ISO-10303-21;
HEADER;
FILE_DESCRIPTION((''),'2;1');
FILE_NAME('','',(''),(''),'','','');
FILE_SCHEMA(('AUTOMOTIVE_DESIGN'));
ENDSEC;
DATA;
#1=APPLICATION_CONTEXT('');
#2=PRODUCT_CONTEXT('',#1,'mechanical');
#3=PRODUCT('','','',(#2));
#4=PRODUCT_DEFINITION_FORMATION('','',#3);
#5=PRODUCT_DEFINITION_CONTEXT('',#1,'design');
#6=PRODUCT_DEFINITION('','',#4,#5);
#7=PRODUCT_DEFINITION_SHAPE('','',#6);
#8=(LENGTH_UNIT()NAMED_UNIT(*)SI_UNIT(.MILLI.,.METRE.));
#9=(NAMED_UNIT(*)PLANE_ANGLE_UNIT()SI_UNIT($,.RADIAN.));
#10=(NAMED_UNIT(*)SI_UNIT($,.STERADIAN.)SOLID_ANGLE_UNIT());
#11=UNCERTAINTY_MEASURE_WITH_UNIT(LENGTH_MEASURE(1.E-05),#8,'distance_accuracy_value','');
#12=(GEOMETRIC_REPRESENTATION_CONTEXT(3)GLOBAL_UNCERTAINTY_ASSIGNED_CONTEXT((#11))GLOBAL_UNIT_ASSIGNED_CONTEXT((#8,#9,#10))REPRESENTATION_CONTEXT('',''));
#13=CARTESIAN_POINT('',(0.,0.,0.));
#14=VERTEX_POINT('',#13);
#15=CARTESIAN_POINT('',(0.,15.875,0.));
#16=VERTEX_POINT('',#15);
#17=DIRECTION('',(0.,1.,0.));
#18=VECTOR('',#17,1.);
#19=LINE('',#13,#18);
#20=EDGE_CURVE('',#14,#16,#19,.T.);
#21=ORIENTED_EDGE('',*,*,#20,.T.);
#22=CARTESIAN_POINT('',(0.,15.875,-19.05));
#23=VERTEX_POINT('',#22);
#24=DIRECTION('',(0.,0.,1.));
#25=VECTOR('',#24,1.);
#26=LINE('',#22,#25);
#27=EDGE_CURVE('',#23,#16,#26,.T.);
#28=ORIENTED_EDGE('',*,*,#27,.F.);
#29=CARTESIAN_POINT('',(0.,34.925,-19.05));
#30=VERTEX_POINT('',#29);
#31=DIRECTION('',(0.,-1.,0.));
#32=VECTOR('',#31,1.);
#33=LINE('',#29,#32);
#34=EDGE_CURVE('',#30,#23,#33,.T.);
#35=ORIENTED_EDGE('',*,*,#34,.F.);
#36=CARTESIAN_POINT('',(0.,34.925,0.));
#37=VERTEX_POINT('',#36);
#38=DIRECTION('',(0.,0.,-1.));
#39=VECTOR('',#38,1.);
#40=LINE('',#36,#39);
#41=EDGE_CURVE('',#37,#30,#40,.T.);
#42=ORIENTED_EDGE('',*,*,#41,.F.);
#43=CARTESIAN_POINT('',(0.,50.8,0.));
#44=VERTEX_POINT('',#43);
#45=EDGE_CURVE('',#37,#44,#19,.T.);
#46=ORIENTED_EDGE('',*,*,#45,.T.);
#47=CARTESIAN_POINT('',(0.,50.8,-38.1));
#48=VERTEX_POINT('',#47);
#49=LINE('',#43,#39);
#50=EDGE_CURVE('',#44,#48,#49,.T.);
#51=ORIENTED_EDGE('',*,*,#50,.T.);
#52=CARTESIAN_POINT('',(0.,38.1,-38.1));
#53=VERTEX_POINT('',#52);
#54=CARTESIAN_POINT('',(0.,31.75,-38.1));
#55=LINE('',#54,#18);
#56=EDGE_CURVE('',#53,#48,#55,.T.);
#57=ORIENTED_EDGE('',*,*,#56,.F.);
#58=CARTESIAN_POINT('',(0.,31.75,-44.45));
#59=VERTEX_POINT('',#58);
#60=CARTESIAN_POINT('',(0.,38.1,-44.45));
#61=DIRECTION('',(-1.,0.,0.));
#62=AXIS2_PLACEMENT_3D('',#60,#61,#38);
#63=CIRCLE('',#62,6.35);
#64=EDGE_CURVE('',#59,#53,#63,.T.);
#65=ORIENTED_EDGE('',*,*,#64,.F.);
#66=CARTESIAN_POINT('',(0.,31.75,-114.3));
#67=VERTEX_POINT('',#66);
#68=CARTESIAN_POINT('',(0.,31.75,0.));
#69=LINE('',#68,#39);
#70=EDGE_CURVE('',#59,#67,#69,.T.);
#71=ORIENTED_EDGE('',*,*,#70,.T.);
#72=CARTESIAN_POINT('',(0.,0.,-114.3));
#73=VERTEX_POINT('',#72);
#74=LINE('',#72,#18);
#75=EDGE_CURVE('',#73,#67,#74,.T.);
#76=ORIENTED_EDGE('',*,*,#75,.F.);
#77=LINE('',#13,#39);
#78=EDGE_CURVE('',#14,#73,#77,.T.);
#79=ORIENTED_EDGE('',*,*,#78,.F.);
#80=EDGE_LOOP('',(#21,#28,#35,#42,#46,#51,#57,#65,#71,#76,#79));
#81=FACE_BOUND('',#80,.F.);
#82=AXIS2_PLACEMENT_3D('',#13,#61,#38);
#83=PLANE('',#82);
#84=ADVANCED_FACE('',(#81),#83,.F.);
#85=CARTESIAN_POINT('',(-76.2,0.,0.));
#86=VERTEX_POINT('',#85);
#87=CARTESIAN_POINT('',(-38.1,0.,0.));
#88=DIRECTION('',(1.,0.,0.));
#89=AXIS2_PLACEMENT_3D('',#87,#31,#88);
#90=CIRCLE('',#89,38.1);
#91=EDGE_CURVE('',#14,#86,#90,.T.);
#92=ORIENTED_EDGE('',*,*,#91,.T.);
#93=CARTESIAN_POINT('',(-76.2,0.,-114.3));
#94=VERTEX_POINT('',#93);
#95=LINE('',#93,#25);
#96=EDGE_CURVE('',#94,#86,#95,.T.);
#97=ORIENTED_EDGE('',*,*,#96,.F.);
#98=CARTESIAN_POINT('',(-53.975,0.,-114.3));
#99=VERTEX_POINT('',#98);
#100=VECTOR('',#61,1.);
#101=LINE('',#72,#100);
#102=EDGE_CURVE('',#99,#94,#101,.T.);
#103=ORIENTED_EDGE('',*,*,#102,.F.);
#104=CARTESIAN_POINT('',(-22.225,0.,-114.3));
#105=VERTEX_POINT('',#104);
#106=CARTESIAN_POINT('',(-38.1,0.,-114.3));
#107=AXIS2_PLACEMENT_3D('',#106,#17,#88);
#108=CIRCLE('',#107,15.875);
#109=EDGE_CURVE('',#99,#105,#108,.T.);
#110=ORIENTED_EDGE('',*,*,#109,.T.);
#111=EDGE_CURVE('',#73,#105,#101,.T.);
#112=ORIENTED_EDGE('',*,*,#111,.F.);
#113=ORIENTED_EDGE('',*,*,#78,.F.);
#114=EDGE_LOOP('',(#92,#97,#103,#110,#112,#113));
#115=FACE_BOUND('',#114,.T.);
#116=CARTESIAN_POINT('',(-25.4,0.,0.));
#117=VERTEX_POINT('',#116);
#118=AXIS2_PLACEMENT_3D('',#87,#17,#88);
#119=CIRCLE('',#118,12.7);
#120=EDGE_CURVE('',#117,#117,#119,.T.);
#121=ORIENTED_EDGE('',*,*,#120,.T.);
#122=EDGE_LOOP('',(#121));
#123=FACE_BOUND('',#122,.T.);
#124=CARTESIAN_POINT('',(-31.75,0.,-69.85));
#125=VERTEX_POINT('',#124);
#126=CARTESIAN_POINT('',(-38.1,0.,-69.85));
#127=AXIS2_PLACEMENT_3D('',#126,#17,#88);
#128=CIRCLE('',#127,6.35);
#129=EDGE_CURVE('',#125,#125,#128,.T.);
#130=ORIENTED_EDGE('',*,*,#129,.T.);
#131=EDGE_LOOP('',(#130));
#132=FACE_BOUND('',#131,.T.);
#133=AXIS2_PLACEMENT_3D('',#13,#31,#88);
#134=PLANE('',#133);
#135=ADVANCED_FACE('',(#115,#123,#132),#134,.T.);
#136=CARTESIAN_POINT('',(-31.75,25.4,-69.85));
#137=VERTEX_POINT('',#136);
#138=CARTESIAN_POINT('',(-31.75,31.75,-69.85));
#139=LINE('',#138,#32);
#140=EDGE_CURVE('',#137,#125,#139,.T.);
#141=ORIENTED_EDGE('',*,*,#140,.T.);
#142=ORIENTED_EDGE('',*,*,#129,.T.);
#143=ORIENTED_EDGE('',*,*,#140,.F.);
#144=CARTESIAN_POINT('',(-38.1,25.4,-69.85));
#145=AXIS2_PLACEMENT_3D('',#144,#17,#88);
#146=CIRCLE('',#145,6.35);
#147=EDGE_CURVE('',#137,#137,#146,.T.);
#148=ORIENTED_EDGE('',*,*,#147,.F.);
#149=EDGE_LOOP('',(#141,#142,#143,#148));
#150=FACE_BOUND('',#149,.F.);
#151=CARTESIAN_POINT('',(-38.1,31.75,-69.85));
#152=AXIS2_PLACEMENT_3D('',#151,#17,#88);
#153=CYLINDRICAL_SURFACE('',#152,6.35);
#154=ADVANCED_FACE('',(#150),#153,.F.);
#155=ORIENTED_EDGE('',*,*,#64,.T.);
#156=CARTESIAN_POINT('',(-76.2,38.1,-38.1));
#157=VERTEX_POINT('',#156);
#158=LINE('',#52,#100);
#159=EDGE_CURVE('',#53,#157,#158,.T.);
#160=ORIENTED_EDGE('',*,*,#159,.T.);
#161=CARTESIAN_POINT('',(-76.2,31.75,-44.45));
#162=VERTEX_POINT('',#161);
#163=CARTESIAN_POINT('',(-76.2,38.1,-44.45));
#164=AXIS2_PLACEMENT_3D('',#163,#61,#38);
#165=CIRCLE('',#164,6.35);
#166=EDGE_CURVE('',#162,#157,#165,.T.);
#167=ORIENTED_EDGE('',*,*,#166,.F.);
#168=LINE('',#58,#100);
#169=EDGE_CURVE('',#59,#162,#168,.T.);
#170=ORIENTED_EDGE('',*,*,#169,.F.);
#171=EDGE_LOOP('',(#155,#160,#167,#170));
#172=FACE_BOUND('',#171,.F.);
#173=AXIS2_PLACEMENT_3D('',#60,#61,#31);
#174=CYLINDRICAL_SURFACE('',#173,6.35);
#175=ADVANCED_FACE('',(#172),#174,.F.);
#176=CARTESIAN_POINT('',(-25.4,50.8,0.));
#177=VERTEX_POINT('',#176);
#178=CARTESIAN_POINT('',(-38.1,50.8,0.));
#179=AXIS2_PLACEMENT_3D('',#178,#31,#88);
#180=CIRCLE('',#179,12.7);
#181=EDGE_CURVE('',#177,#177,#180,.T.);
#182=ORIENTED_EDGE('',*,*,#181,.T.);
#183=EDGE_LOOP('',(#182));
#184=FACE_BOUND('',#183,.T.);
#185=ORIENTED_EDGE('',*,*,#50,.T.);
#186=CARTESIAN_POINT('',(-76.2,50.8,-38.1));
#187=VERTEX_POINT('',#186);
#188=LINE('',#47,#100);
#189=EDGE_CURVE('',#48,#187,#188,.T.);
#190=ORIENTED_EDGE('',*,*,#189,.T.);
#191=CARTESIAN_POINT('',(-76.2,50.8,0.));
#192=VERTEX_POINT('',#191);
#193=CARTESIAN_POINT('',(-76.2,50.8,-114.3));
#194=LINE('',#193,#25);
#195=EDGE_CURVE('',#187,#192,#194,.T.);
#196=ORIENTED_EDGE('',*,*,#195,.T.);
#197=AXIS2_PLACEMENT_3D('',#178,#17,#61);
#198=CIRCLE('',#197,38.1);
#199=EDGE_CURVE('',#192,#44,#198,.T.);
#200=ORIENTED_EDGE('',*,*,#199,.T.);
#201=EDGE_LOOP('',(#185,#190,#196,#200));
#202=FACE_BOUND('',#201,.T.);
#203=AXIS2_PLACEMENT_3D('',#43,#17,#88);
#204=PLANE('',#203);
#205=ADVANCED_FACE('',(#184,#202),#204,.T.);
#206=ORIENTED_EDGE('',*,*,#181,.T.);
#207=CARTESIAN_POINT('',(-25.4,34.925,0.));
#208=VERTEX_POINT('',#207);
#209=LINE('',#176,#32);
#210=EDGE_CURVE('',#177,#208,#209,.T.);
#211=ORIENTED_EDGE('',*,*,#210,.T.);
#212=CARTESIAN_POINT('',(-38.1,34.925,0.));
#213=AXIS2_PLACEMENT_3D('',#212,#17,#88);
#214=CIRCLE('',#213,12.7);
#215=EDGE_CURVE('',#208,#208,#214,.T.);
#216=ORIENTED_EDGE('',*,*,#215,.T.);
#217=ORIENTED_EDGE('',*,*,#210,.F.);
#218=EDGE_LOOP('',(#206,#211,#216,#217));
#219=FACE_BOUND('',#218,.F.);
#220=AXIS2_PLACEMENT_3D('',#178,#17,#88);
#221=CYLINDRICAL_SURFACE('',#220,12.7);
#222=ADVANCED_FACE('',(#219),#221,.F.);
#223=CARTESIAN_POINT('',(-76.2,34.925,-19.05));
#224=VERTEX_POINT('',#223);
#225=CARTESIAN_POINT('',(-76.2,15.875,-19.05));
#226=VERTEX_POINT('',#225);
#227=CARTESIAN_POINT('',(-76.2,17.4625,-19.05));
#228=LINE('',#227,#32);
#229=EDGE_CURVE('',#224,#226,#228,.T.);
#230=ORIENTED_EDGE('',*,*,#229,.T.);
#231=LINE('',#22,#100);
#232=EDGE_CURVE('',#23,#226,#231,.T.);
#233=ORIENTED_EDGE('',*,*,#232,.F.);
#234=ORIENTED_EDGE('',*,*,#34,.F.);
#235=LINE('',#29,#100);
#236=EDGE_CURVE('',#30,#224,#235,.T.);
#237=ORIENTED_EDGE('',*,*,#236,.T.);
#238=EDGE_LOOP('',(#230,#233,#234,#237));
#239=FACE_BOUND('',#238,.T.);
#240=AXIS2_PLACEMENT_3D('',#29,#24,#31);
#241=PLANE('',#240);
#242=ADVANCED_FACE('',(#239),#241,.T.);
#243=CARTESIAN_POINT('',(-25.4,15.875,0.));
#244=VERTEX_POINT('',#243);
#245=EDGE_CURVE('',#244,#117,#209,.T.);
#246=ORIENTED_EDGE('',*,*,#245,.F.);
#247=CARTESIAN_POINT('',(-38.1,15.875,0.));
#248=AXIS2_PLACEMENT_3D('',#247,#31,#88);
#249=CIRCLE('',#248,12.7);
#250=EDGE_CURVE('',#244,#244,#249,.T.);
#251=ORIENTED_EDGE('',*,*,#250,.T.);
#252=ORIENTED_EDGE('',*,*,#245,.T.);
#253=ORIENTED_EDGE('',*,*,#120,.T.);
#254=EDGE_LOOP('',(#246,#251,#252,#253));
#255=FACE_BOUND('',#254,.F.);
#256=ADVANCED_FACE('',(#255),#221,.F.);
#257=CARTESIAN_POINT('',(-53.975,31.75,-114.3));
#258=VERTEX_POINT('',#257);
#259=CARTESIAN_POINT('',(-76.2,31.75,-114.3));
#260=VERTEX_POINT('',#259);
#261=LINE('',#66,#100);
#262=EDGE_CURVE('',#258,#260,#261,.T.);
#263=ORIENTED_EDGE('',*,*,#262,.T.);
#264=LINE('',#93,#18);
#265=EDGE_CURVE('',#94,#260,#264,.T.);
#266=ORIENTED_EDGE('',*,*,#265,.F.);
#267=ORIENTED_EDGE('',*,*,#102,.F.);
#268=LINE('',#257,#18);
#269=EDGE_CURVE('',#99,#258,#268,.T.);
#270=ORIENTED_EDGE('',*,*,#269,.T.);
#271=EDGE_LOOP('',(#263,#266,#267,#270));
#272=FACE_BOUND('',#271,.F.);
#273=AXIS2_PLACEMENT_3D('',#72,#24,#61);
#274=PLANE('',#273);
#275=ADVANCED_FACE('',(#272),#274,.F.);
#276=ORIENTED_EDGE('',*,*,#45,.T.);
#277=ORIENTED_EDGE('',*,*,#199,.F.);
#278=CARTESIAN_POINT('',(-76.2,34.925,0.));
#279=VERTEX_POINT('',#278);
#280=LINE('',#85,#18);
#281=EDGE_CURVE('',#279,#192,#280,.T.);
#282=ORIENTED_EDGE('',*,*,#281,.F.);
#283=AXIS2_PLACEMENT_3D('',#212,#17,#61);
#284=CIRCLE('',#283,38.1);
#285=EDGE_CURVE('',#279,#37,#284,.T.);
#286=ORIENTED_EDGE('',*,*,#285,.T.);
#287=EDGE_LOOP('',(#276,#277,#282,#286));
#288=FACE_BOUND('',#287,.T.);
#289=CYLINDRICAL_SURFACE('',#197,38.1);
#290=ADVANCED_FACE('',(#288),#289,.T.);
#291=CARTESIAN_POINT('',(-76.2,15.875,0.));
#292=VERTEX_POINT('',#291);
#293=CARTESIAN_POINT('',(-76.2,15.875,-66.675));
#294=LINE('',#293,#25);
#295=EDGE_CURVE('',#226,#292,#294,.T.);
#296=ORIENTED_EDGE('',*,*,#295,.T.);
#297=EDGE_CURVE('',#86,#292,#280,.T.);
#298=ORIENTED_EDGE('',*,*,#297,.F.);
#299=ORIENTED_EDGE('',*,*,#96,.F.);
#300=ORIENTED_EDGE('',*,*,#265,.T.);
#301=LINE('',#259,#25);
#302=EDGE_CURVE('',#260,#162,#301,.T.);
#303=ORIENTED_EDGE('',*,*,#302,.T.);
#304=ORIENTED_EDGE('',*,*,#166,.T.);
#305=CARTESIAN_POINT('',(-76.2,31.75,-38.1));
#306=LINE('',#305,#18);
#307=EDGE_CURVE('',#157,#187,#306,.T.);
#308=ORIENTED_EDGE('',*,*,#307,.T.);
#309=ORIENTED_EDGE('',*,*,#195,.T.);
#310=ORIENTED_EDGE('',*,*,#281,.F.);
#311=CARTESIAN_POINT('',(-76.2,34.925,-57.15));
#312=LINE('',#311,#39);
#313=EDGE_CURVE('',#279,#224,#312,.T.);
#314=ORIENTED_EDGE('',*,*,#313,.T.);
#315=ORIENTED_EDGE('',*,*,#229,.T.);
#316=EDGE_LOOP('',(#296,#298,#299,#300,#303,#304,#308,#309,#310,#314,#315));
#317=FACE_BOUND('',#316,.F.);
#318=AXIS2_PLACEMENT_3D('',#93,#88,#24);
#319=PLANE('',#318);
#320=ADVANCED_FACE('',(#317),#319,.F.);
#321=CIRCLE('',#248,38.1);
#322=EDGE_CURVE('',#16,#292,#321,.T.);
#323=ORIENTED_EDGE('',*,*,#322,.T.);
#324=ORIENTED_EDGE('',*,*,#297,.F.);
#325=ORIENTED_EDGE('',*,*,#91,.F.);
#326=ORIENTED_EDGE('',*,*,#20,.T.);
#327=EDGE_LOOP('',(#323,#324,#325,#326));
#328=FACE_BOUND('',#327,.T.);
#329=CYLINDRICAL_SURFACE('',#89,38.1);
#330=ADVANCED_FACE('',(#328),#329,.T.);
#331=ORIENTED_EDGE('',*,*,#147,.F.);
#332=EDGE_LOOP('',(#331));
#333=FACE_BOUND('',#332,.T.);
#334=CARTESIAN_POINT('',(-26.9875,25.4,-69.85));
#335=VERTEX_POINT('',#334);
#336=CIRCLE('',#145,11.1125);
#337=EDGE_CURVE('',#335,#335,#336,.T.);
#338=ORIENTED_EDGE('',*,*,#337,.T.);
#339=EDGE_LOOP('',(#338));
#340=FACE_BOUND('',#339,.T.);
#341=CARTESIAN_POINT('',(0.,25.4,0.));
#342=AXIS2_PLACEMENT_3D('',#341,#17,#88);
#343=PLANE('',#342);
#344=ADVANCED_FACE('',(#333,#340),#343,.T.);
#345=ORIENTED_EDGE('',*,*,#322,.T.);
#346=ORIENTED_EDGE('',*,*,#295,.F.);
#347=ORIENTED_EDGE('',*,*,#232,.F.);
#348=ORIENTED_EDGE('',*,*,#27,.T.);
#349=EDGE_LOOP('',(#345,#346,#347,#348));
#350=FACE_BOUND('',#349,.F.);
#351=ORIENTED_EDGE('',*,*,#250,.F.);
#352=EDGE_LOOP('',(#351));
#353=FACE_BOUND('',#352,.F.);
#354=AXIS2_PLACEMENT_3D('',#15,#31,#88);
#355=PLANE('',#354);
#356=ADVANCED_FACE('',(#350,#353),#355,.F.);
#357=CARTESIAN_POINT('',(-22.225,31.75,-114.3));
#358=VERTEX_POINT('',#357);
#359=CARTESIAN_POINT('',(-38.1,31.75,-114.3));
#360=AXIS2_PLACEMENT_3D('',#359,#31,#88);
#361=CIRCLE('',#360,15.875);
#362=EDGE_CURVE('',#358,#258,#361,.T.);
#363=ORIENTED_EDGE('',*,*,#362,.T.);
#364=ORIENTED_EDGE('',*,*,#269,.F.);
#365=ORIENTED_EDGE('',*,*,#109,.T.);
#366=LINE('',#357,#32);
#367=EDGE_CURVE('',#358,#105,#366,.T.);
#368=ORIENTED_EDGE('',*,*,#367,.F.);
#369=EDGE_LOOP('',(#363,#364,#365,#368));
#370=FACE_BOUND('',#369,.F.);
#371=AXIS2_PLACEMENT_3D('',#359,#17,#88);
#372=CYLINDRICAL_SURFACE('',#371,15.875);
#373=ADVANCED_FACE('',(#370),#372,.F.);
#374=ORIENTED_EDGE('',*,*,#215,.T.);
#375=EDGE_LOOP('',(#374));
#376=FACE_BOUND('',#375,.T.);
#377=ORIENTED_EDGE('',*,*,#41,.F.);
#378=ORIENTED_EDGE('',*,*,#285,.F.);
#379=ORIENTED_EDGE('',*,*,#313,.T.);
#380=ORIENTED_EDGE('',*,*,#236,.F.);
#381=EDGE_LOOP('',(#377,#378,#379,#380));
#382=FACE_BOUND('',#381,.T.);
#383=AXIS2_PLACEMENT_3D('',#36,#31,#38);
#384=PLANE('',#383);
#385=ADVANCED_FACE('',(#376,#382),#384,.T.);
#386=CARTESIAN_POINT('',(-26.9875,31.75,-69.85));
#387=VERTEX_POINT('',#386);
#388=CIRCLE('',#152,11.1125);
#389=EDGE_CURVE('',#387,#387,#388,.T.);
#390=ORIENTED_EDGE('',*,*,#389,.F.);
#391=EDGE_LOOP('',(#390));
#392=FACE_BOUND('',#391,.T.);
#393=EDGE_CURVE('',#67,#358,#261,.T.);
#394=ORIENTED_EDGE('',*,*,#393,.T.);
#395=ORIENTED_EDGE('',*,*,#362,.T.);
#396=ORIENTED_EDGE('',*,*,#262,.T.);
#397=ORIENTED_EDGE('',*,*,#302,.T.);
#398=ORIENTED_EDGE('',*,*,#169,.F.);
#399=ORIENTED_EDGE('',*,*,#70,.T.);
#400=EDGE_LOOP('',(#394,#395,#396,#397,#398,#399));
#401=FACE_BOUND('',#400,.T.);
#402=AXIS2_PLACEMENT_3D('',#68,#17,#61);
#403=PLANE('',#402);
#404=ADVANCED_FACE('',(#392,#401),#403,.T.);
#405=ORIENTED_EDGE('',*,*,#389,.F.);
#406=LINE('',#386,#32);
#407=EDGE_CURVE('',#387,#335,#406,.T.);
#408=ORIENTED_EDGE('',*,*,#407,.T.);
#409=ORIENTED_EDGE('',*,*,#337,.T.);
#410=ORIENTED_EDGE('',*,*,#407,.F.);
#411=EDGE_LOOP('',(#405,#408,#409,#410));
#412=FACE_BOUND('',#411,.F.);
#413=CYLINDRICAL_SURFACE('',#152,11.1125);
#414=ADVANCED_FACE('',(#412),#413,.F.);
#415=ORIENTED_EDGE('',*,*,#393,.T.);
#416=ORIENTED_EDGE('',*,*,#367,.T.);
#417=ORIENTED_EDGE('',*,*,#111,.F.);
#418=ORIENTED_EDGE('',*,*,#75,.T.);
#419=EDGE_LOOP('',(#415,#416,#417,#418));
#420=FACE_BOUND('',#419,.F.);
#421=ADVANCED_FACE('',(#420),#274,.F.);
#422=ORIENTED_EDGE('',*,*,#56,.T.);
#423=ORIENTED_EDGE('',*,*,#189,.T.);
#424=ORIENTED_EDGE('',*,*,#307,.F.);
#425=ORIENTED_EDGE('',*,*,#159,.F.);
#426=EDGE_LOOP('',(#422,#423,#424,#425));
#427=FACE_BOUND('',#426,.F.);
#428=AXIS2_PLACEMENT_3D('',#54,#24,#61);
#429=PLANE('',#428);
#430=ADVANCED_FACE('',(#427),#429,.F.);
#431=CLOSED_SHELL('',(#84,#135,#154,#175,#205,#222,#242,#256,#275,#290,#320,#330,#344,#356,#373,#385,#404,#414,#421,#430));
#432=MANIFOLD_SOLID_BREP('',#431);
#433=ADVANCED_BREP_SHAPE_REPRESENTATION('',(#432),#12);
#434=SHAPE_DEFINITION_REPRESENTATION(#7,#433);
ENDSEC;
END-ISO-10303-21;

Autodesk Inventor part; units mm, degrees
ref_plane "YZ Plane" through (0, 0, 0) normal (1, 0, 0) x (0, 1, 0)
ref_plane "XZ Plane" through (0, 0, 0) normal (0, 1, 0) x (-1, 0, 0)
ref_plane "XY Plane" through (0, 0, 0) normal (0, 0, 1) x (1, 0, 0)
sketch "Sketch1" plane through (0, 0, 0) normal (0, 1, 0) x (-1, 0, 0)
  line L0 (0, 0) -> (0, -114.3)
  line L1 (0, -114.3) -> (76.2, -114.3)
  line L2 (76.2, -114.3) -> (76.2, 0)
  line L3 (76.2, 0) -> (0, 0)
  dimension "d0" = 114.3
  dimension "d1" = 76.2
extrude "REC 1" add sketch "Sketch1" along normal blind 31.75
sketch "Sketch2" plane through (0, 31.75, 0) normal (0, 1, 0) x (1, 0, 0)
  line L0 (-76.2, 0) -> (0, 0) projected
  line L1 (0, 0) -> (0, 38.1)
  line L2 (0, 0) -> (0, 114.3) projected
  line L3 (0, 38.1) -> (-76.2, 38.1)
  line L4 (-76.2, 114.3) -> (-76.2, 0) projected
  line L5 (-76.2, 38.1) -> (-76.2, 0)
  line L6 (-76.2, 0) -> (0, 0)
  dimension "d4" = 38.1
extrude "REC 2" add sketch "Sketch2" along normal blind 19.05
fillet "Face Fillet1" radius 6.35 1 edges at (-38.1, 31.75, -38.1)
sketch "Sketch3" plane through (0, 31.75, 0) normal (0, 1, 0) x (1, 0, 0)
  line L0 (0, 114.3) -> (-76.2, 114.3) projected
  circle A0 centre (-38.1, 114.3) radius 15.875
  point P0 (0, 0)
  dimension "d8" = 15.875
extrude "C CUT -  RIGHT" cut sketch "Sketch3" against normal through all
sketch "Sketch5" plane through (0, 50.8, 0) normal (0, 1, 0) x (1, 0, 0)
  line L0 (-76.2, 0) -> (0, 0) projected
  arc A0 (-76.2, 0) -> (0, 0) centre (-38.1, 0) ccw
  line L1 (0, 0) -> (-76.2, 0)
extrude "Extrusion5" cut sketch "Sketch5" against normal blind 19.05
sketch "Sketch6" plane through (0, 50.8, 0) normal (0, 1, 0) x (1, 0, 0)
  line L0 (-76.2, 0) -> (0, 0) projected
  arc A0 (-76.2, 0) -> (0, 0) centre (-38.1, 0) ccw
extrude "TOP ARC" add sketch "Sketch6" against normal blind 15.875
sketch "Sketch7" plane through (0, 0, 0) normal (0, -1, 0) x (1, 0, 0)
  line L0 (0, 0) -> (-76.2, 0) projected
  arc A0 (0, 0) -> (-76.2, 0) centre (-38.1, 0) ccw
extrude "BOTTOM ARC" add sketch "Sketch7" against normal blind 15.875
sketch "Sketch8" plane through (0, 50.8, 0) normal (0, 1, 0) x (1, 0, 0)
  circle A0 centre (-38.1, 0) radius 12.7
  line L0 (0, 0) -> (-76.2, 0) projected
  line L1 (0, 38.1) -> (-76.2, 38.1) projected
  line L2 (-76.2, 38.1) -> (-76.2, 0) projected
  point P0 (-38.1, 38.1)
  dimension "d21" = 25.4
  dimension "d25" = 38.1
  dimension "d26" = 38.1
extrude "HOLE - LEFT" cut sketch "Sketch8" against normal through all
sketch "Sketch4" plane through (0, 31.75, 0) normal (0, 1, 0) x (1, 0, 0)
  circle A0 centre (-38.1, 69.85) radius 6.35
  line L0 (-53.975, 114.3) -> (-76.2, 114.3) projected
  point P0 (0, 0)
  dimension "d11" = 44.45
  dimension "d12" = 12.7
extrude "HOLE - RIGHT" cut sketch "Sketch4" against normal through all
sketch "Sketch9" plane through (0, 31.75, 0) normal (0, 1, 0) x (1, 0, 0)
  circle A0 centre (-38.1, 69.85) radius 6.35 projected
  circle A1 centre (-38.1, 69.85) radius 11.1125
  point P0 (0, 0)
  dimension "d27" = 22.225
extrude "BIGGER HOLE - RIGHT" cut sketch "Sketch9" against normal blind 6.35
sketch "Sketch10" plane through (0, 0, -114.3) normal (1, 0, 0) x (0, 0, -1)
  line L0 (-114.3, 15.875) -> (-114.3, 34.925) projected
  line L1 (-114.3, 34.925) -> (-95.25, 34.925)
  line L2 (-95.25, 34.925) -> (-95.25, 15.875)
  line L3 (-95.25, 15.875) -> (-114.3, 15.875)
  line L4 (-114.3, 15.875) -> (-114.3, 34.925)
  point P0 (-114.3, 0)
  dimension "d44" = 19.05
extrude "Extrusion10" cut sketch "Sketch10" against normal through all
properties part number "pivot_lock"
